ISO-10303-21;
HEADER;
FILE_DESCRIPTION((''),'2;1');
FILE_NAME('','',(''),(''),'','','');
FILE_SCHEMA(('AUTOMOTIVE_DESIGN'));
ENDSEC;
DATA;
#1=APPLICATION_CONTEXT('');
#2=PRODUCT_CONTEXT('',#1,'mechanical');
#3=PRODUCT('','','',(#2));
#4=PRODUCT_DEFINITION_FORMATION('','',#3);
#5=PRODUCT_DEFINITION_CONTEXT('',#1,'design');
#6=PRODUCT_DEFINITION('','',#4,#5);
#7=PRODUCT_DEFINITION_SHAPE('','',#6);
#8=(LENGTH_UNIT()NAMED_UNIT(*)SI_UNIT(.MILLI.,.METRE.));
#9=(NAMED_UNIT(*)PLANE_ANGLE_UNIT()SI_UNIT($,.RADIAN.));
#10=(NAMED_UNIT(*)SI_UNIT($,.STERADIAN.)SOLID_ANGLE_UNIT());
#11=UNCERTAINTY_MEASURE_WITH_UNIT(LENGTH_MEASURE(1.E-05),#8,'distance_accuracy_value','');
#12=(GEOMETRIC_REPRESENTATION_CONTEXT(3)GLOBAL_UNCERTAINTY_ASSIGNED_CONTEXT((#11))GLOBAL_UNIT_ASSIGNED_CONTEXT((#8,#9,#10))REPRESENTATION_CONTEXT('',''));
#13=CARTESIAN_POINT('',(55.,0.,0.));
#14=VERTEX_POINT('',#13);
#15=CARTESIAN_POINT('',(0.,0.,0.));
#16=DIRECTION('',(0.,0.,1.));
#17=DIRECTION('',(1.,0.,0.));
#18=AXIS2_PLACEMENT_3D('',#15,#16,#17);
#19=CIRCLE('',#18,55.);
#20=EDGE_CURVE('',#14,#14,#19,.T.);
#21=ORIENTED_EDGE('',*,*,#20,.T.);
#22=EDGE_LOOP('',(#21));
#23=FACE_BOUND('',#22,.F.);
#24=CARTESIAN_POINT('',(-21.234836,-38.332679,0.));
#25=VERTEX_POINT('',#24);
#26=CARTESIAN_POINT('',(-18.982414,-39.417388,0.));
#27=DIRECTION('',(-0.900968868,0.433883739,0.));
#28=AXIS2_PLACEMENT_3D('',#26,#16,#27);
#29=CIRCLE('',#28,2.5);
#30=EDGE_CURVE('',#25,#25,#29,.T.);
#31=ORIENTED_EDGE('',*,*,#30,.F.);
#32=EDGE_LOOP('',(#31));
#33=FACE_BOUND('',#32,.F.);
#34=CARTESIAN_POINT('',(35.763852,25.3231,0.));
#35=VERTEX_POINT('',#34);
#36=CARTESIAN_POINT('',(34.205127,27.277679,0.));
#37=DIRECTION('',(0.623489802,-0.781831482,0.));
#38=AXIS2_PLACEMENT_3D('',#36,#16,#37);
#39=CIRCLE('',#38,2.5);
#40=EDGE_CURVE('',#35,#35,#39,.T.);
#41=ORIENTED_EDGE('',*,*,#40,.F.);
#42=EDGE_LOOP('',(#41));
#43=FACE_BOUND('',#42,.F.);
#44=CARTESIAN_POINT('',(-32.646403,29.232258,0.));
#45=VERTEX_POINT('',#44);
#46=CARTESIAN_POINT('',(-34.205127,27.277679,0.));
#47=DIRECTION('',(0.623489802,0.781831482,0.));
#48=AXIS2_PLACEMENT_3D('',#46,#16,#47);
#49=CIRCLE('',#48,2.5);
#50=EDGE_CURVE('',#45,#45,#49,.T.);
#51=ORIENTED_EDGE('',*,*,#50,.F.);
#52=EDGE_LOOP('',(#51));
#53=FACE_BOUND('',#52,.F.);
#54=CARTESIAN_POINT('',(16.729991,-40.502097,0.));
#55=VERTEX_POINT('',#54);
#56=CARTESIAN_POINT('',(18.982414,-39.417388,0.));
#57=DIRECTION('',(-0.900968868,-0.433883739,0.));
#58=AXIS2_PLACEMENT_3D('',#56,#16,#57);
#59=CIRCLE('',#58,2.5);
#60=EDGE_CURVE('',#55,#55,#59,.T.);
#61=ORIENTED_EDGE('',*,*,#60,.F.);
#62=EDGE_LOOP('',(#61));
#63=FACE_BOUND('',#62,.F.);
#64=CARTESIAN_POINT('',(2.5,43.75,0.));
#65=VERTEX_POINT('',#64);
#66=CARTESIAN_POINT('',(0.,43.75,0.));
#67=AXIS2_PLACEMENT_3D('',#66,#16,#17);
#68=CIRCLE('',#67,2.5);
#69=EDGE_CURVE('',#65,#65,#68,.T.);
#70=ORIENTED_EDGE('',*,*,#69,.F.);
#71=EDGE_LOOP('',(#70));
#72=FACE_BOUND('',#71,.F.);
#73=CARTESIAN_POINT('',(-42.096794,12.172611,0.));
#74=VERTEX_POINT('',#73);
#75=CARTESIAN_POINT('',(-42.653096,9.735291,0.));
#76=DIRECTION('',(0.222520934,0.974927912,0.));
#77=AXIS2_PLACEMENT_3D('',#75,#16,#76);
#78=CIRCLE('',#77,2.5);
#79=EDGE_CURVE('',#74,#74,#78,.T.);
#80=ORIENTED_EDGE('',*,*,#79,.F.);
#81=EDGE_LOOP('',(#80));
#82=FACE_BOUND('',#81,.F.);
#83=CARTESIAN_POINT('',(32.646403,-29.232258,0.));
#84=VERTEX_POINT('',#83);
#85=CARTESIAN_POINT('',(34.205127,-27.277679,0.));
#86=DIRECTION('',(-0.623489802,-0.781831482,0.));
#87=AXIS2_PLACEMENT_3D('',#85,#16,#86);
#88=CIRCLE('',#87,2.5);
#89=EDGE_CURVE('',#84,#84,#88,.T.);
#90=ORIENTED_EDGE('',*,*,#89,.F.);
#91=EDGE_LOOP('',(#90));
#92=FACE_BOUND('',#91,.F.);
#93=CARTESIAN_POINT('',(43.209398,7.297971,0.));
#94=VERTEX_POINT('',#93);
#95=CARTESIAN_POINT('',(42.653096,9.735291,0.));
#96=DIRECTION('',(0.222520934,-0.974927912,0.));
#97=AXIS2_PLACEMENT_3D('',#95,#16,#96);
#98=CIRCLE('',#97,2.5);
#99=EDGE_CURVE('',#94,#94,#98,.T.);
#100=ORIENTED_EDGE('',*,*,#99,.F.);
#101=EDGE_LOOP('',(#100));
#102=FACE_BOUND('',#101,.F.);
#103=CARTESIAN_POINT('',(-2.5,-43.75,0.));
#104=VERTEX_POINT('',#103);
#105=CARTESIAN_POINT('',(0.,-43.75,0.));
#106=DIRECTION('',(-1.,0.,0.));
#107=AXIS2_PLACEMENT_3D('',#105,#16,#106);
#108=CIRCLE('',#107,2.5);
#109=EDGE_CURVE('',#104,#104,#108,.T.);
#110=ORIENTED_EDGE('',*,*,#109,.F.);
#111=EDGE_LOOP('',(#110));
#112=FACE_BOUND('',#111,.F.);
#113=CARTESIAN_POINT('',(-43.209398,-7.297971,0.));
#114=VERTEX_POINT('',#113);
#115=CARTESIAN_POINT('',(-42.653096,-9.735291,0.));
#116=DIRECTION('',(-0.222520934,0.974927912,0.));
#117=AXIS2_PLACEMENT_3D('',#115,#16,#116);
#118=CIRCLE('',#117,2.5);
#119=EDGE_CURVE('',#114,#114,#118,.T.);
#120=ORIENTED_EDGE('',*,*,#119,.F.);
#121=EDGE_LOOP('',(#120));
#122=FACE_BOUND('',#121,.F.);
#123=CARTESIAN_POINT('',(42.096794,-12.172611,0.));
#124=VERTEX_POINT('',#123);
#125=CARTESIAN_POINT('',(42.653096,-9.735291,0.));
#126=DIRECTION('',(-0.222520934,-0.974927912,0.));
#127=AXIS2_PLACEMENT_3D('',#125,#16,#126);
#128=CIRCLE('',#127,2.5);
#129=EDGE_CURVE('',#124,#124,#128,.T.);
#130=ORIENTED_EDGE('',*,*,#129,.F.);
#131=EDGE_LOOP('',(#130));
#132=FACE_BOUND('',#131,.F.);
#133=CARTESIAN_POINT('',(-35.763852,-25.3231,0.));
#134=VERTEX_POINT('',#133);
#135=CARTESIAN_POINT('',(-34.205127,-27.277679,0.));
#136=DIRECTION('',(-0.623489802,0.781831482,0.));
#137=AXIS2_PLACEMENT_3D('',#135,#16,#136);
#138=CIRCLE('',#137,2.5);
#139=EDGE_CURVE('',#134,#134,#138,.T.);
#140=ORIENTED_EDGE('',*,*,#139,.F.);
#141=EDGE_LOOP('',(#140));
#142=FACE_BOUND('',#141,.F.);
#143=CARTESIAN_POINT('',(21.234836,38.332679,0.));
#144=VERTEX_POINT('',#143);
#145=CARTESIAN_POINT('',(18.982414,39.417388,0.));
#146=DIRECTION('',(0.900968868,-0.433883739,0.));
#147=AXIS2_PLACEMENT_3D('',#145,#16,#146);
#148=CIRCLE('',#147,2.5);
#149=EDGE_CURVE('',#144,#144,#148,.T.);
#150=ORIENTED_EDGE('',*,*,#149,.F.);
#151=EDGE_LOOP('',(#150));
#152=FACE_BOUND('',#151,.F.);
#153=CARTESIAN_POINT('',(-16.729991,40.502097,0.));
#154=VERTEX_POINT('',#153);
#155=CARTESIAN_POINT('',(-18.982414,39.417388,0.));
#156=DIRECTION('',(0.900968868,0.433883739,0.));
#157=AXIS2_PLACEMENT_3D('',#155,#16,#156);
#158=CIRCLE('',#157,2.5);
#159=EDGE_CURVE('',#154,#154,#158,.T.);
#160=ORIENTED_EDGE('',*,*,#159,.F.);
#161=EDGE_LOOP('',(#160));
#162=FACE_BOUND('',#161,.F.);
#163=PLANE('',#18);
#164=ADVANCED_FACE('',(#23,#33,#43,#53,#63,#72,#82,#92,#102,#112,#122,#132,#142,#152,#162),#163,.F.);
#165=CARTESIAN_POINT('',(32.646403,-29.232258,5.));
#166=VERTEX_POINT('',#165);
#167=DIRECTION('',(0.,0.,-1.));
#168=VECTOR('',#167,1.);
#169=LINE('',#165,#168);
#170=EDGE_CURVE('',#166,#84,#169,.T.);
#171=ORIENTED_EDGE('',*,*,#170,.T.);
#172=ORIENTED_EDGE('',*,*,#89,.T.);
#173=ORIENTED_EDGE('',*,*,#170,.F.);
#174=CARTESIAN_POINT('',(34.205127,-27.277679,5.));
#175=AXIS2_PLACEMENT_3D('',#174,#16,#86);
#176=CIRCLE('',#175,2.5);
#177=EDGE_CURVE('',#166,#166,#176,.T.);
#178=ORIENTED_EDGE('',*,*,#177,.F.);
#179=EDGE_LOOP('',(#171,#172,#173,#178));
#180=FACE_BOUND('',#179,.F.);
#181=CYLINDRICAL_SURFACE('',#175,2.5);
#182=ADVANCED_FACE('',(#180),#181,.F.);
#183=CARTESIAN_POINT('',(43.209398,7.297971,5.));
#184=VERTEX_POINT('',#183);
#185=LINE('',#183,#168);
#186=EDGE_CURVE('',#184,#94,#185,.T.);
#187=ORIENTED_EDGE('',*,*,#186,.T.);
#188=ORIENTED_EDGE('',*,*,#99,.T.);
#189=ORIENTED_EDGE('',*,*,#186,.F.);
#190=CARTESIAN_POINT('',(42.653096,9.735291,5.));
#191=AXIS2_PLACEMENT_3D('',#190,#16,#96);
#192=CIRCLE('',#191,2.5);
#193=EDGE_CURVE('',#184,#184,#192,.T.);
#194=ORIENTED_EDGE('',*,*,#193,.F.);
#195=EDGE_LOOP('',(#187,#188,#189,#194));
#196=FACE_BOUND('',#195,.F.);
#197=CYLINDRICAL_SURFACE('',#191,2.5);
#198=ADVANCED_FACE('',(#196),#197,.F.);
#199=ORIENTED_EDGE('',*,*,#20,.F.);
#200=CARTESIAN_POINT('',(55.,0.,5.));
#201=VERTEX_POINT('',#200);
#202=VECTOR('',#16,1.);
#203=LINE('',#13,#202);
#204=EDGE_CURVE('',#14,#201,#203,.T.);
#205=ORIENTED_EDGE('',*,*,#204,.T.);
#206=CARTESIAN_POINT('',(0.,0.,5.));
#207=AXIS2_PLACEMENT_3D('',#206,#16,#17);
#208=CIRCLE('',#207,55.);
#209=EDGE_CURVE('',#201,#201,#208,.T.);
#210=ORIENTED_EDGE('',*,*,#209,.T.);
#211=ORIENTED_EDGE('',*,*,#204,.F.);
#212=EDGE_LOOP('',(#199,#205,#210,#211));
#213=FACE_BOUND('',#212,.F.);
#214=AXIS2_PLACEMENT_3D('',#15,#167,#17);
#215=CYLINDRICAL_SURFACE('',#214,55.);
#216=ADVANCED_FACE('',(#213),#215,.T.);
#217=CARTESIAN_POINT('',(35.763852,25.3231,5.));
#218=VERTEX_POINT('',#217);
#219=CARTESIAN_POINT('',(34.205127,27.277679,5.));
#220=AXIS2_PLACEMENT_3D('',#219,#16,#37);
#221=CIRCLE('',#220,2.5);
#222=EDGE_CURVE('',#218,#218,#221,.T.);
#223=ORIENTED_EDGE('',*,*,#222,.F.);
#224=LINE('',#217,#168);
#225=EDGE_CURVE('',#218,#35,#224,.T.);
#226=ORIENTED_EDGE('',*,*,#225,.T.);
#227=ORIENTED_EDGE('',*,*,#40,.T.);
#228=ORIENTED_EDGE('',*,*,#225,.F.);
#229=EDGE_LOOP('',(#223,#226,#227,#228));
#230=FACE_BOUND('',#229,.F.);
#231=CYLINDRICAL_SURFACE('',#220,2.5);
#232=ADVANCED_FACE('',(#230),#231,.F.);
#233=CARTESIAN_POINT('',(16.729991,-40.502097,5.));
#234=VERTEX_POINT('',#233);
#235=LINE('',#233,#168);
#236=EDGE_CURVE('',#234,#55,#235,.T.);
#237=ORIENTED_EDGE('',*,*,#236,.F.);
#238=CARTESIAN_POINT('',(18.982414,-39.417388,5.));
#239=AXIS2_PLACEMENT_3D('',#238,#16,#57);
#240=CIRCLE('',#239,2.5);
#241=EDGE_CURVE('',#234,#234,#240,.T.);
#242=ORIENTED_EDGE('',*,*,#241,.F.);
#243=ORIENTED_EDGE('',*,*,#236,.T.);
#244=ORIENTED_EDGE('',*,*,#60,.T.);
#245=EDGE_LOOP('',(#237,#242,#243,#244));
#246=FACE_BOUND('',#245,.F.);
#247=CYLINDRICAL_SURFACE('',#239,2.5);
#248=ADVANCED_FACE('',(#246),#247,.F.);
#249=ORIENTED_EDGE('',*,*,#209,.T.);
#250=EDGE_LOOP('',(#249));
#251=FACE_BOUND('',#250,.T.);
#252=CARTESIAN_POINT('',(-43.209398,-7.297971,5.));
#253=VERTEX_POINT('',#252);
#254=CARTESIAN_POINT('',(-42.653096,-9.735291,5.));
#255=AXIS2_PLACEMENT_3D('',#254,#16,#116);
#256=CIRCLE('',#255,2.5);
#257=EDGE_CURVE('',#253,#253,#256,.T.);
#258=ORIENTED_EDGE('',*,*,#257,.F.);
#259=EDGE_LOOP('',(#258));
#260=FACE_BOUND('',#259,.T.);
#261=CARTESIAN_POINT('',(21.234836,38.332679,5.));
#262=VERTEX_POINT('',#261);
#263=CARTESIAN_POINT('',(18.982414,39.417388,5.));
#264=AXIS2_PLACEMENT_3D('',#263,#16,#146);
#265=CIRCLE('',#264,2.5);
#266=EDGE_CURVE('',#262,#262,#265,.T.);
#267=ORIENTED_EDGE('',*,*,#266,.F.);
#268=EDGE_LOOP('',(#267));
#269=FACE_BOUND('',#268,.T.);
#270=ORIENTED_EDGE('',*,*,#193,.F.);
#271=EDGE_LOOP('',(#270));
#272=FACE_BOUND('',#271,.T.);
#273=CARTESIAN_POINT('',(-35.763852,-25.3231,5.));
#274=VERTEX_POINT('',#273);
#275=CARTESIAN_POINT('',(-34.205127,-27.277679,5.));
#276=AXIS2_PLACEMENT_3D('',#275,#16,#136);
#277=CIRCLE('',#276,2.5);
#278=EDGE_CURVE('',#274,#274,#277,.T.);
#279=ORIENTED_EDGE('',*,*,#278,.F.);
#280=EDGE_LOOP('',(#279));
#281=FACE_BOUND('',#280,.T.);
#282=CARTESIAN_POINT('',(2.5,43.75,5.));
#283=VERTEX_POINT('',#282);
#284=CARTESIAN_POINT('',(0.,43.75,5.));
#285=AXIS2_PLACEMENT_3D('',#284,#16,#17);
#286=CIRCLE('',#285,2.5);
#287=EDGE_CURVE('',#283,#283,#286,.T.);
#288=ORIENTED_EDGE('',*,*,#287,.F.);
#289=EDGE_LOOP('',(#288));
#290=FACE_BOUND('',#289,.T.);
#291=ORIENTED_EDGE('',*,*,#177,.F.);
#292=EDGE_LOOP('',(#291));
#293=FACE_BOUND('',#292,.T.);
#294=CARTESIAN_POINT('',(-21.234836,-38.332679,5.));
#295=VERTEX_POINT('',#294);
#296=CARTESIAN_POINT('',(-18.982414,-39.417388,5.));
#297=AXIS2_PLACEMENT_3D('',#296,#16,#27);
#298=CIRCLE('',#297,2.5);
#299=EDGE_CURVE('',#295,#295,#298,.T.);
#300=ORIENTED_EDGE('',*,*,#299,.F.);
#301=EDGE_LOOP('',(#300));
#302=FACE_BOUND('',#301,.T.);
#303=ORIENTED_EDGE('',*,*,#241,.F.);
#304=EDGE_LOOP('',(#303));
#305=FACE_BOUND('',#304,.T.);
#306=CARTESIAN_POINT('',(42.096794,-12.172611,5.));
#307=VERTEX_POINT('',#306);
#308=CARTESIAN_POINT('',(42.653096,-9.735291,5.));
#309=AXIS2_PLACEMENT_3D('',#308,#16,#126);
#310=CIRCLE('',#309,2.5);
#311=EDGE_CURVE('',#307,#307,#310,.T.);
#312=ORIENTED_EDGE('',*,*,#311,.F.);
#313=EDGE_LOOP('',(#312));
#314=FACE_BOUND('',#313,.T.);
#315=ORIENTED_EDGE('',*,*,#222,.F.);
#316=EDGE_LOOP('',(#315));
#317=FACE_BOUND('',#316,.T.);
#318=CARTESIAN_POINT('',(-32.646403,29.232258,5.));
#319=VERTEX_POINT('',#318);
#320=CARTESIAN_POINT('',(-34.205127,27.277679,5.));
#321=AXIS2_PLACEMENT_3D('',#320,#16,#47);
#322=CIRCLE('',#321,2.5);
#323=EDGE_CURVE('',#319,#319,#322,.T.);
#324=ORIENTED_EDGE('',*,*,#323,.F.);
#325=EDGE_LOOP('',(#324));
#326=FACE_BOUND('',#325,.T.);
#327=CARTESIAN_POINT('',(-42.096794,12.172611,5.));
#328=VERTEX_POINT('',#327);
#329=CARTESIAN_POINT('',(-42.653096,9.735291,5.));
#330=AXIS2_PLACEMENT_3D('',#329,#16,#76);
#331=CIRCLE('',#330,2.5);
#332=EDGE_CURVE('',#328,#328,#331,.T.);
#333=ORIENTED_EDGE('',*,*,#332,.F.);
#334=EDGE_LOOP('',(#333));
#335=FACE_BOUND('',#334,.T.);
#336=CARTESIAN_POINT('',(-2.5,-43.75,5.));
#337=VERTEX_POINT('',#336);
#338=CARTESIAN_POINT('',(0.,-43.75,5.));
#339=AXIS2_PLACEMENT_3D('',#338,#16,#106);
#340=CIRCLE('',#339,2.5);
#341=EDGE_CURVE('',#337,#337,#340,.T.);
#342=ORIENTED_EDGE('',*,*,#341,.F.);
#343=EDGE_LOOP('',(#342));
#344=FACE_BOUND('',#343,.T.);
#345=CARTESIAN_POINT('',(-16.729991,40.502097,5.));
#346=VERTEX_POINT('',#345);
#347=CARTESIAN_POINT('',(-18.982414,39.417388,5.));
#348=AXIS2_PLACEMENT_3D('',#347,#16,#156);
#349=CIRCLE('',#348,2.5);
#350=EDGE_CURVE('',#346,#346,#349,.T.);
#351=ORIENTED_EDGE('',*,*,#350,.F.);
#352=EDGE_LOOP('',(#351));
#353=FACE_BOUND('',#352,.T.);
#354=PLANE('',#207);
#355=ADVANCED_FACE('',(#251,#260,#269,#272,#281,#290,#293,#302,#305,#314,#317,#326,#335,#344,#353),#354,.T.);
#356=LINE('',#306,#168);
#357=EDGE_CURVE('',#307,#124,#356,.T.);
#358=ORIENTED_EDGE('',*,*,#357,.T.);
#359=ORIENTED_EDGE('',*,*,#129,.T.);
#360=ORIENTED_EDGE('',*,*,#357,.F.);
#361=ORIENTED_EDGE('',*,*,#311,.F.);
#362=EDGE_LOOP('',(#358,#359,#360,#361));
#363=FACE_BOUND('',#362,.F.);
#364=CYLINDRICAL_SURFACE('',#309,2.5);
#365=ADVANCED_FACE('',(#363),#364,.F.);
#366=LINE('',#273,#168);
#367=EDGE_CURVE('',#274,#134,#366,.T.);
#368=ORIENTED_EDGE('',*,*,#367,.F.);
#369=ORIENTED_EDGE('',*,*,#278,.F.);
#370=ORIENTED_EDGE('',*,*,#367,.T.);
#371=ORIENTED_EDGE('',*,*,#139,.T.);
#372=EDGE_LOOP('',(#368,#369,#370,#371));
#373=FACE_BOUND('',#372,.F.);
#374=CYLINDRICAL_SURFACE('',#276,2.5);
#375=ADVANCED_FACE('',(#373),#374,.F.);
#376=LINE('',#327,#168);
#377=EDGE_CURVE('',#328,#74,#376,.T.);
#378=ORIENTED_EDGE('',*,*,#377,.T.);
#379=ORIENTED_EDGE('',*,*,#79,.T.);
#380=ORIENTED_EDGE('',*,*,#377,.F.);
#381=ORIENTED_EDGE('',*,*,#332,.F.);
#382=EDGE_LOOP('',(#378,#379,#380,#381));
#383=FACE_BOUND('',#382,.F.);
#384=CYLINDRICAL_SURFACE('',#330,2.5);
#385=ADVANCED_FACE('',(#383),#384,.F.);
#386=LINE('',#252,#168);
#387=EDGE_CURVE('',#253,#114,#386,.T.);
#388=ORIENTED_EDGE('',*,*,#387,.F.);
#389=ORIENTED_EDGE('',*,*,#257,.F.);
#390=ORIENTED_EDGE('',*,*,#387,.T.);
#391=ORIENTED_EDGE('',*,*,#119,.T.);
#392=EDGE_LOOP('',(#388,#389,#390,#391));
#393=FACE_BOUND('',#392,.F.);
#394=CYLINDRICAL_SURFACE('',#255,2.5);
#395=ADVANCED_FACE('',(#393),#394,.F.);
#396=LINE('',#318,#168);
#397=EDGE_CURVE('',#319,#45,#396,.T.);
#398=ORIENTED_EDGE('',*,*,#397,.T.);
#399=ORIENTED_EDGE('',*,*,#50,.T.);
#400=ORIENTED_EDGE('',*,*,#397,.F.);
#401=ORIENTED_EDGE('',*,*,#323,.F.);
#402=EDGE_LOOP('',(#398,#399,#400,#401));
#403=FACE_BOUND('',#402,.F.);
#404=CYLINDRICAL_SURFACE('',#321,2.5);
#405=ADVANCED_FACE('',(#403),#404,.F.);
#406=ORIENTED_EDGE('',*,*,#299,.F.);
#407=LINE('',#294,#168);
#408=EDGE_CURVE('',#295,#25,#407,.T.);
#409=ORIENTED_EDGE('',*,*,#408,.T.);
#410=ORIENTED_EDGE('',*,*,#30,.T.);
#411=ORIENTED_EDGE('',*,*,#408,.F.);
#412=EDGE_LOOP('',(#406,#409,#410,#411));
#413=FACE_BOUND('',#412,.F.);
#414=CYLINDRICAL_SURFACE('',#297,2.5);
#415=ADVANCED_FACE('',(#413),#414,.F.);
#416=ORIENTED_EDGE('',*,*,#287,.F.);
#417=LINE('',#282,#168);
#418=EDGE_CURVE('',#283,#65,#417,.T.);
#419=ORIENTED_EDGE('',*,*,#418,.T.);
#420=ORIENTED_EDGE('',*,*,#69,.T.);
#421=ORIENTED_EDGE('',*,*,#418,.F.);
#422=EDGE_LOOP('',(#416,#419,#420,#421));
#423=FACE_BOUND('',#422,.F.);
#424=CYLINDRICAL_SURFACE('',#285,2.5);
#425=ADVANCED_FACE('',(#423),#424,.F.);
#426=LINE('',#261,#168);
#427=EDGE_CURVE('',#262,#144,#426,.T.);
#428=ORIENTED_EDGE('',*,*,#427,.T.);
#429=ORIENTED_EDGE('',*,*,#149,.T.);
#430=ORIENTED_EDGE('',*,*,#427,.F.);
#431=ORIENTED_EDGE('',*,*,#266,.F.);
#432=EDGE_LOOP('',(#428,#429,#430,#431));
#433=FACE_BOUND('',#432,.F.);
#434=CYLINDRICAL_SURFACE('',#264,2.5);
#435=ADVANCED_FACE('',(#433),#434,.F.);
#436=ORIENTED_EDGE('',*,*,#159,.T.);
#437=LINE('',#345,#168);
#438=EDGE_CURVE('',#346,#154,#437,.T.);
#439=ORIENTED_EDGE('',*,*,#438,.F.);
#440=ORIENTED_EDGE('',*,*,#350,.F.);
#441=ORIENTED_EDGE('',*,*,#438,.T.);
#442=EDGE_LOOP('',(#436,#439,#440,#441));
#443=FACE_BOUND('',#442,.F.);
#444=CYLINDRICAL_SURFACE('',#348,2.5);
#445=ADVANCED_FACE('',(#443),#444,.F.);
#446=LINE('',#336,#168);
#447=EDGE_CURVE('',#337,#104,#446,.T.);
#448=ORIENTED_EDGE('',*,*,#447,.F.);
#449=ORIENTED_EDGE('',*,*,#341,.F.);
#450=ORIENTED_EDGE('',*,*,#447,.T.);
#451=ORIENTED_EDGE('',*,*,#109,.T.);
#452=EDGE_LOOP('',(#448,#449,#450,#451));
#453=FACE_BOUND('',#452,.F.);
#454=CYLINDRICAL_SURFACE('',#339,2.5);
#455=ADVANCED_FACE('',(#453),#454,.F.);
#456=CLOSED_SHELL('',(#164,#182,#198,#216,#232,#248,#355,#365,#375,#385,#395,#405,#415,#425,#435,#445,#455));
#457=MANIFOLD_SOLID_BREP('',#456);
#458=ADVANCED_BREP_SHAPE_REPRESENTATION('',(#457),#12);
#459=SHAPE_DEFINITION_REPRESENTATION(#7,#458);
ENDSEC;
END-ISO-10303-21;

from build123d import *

# Parameters (mm, degrees)
F0_R            = 55
F1_DEPTH        = 5
F2_R            = 2.5
F3_DEPTH        = 5.001
F3_COPIES_COUNT = 14


# Not quite as in the source:
# - a pattern or mirror of a feature is missing from the dataset's text; its kind, count and spacing are read off the source's solid


with BuildPart() as f1:
    # F0 (on Top) → F1 (new body)
    with BuildSketch(Plane.XY):
        Circle(F0_R)
    extrude(amount=F1_DEPTH)

    # F2 (on face) → F3 (cut, through all)
    with BuildSketch(Plane.XY.offset(5)):
        with Locations((0, 43.75)):
            Circle(F2_R)
    f3 = extrude(amount=-F3_DEPTH, mode=Mode.SUBTRACT)

    # F3_copies: F3 ×14 about axis
    f3_copies_axis = Axis((0, 0, 0), (0, 0, 1))
    for i in range(1, F3_COPIES_COUNT):
        add(f3.rotate(f3_copies_axis, i * 360 / F3_COPIES_COUNT), mode=Mode.SUBTRACT)


solid = f1.part
